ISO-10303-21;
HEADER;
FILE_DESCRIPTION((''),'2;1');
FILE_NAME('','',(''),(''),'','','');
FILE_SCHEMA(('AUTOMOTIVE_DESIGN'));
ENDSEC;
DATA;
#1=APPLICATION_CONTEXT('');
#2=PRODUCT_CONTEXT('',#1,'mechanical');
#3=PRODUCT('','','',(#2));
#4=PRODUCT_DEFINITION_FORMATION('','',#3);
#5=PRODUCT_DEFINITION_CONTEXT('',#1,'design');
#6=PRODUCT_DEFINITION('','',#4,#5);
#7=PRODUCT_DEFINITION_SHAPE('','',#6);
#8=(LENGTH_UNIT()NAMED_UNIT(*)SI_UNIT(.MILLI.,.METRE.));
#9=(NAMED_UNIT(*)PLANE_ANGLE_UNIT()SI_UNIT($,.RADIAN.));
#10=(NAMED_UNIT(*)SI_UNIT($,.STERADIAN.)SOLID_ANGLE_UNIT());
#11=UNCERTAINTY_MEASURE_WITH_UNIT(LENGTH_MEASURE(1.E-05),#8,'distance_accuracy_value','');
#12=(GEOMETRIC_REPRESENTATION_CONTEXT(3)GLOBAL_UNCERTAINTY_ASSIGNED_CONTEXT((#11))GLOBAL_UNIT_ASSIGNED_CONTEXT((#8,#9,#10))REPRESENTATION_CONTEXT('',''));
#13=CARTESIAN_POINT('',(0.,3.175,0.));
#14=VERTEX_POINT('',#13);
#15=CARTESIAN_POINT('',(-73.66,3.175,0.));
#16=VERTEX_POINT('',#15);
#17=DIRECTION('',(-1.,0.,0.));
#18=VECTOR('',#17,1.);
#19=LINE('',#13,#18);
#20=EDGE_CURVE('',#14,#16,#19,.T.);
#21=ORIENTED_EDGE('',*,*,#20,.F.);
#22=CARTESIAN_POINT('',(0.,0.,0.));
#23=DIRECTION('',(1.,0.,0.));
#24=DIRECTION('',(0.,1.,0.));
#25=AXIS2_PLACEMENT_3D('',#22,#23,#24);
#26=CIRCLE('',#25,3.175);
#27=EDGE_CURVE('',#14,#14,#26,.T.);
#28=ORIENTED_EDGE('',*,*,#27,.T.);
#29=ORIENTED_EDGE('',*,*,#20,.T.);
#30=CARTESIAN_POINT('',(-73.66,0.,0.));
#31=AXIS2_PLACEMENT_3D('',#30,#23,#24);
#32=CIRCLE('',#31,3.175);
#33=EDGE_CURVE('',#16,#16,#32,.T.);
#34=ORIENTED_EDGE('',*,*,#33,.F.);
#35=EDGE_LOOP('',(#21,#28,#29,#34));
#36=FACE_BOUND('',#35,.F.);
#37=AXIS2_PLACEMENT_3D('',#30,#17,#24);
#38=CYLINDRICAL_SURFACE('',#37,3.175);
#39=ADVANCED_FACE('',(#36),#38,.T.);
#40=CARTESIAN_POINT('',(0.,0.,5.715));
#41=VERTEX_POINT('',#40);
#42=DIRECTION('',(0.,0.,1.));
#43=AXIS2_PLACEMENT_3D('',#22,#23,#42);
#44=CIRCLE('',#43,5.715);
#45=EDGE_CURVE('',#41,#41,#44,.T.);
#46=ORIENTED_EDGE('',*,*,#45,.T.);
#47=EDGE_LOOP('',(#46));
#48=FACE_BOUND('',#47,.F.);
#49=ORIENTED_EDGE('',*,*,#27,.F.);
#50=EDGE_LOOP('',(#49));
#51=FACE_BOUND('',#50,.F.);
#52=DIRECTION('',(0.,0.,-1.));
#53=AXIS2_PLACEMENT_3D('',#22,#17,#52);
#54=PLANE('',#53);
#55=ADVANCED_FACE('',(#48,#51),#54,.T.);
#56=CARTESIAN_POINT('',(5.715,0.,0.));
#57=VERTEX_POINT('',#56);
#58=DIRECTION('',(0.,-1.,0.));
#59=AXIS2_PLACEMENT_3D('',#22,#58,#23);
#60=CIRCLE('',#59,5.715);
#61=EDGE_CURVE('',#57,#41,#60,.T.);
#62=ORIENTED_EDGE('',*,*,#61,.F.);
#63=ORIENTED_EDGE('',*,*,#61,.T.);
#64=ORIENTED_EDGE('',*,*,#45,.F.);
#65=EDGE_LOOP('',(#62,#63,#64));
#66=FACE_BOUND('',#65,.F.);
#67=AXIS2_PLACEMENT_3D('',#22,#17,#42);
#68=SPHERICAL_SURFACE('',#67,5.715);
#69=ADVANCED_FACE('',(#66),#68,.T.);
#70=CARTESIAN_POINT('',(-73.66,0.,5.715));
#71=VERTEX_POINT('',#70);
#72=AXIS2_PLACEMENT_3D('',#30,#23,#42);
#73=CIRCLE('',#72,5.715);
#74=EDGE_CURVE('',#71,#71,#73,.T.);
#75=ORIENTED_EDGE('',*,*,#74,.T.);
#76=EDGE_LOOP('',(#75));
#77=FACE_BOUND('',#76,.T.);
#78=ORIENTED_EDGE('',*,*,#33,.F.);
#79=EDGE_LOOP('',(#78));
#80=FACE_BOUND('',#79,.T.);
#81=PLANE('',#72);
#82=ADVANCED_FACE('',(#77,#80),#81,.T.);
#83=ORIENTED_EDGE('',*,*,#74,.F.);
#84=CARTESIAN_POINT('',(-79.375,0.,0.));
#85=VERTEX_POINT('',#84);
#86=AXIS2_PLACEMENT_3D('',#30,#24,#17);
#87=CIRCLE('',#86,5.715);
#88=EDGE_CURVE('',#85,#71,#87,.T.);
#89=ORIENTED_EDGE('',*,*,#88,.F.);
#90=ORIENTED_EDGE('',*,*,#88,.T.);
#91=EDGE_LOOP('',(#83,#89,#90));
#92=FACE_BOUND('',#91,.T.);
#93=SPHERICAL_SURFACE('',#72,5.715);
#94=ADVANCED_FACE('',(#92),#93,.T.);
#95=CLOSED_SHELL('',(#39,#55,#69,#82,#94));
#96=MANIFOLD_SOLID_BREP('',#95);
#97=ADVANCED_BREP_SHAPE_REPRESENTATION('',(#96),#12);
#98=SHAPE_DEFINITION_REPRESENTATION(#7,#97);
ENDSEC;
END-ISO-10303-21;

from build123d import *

# Parameters (mm, degrees)
F0_R     = 3.175
F1_DEPTH = 36.83


# Not quite as in the source:
# - a length typed as a fraction of an inch, garbled in the dataset ("3 / 203.2 mm" for 3/8 in), is restored
# - a feature names something its author has since deleted; it is built from what else it names


with BuildPart() as f1:
    # F0 (on Right) → F1 (new body)
    with BuildSketch(Plane.YZ):
        Circle(F0_R)
    extrude(amount=-F1_DEPTH)

    # F2 (on Front) → F3 (revolve)
    with BuildSketch(Plane.XZ):
        with BuildLine():
            Line((0, 3.175), (0, 0))
            Line((0, 0), (5.715, 0))
            ThreePointArc((5.715, 0), (4.0411152545, 4.0411152545), (0, 5.715))
            Line((0, 5.715), (0, 3.175))
        make_face()
    revolve(axis=Axis((0, 0, 0), (1, 0, 0)))

    # F4: F1 across face


with BuildPart() as f1_1:
    add(f1.part)
    add(f1.part.mirror(Plane(origin=(-36.83, 0, 0), x_dir=(0, 1, 0), z_dir=(-1, 0, 0))))


solid = f1_1.part
